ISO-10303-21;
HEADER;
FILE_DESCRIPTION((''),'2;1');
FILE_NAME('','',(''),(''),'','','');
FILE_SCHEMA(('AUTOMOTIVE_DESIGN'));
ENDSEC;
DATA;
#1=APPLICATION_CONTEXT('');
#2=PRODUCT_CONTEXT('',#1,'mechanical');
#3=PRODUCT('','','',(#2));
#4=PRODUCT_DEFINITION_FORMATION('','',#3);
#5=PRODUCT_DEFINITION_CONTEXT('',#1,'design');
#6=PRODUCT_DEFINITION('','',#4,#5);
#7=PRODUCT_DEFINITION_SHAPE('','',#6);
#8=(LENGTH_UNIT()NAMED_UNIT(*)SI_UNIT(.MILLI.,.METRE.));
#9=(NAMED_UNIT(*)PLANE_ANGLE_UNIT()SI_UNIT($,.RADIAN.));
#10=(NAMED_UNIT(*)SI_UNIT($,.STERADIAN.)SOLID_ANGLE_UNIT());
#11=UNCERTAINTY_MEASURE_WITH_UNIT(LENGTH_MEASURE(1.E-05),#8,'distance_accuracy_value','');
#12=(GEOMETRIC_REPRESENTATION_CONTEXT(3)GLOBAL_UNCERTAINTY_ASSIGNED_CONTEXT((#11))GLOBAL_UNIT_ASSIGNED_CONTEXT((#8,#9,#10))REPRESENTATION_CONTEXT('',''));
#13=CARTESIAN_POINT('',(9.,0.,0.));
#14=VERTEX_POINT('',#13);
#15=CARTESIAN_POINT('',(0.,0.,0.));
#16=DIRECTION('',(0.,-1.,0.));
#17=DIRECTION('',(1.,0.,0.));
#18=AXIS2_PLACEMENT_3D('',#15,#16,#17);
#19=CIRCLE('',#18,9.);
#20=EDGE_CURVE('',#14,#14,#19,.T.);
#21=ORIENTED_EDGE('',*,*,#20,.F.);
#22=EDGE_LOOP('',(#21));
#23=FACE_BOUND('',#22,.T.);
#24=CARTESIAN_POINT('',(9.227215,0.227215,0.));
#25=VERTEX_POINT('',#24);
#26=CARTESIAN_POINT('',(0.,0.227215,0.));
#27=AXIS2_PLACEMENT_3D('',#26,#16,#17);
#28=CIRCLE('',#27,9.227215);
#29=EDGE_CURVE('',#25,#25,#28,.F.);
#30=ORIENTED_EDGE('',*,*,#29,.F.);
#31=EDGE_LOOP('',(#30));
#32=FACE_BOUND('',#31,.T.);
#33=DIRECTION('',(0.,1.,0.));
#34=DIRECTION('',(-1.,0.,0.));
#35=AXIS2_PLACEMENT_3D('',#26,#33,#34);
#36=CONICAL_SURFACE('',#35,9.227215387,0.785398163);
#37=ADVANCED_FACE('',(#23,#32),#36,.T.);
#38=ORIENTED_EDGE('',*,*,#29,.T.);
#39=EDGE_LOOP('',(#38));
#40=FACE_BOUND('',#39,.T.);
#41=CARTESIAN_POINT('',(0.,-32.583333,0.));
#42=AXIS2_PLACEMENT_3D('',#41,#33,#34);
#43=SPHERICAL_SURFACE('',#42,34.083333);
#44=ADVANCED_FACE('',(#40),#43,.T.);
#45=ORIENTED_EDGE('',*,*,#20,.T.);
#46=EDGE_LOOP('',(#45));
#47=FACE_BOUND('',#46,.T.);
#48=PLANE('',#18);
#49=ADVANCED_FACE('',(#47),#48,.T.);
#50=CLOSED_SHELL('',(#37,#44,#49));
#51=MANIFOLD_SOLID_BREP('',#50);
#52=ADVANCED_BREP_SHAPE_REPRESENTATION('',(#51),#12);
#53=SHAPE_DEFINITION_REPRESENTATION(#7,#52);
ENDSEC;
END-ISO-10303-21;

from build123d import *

# Parameters (mm, degrees)
CHAMFER1_SIZE = 1


with BuildPart() as part:
    # Sketch1 → Revolve1 (revolve)
    with BuildSketch(Plane.XY):
        with BuildLine():
            Line((0, 1.5), (0, 0))
            Line((0, 0), (-10, 0))
            ThreePointArc((-10, 0), (-5.055937104, 1.122914027), (0, 1.5))
        make_face()
    revolve(axis=Axis((0, 1.5, 0), (0, -1, 0)))

    # Chamfer1
    # the kernel refuses this chamfer: 1, 0.800391389 mm, written as the material it takes off along each edge
    with BuildSketch(Plane(origin=(0, 0, 0), x_dir=(-1, 0, 0), z_dir=(0, 0, 1))) as chamfer1_piece_1:
        with BuildLine():
            Line((10 - CHAMFER1_SIZE, 0), (9.227215387, -0.227215387))
            ThreePointArc((9.227215387, -0.227215387), (9.623464085, -0.113188655), (10, 0))
            Line((10, 0), (10 - CHAMFER1_SIZE, 0))
        make_face()
    revolve(axis=Axis((0, 0, 0), (0, -1, 0)), mode=Mode.SUBTRACT)


solid = part.part
